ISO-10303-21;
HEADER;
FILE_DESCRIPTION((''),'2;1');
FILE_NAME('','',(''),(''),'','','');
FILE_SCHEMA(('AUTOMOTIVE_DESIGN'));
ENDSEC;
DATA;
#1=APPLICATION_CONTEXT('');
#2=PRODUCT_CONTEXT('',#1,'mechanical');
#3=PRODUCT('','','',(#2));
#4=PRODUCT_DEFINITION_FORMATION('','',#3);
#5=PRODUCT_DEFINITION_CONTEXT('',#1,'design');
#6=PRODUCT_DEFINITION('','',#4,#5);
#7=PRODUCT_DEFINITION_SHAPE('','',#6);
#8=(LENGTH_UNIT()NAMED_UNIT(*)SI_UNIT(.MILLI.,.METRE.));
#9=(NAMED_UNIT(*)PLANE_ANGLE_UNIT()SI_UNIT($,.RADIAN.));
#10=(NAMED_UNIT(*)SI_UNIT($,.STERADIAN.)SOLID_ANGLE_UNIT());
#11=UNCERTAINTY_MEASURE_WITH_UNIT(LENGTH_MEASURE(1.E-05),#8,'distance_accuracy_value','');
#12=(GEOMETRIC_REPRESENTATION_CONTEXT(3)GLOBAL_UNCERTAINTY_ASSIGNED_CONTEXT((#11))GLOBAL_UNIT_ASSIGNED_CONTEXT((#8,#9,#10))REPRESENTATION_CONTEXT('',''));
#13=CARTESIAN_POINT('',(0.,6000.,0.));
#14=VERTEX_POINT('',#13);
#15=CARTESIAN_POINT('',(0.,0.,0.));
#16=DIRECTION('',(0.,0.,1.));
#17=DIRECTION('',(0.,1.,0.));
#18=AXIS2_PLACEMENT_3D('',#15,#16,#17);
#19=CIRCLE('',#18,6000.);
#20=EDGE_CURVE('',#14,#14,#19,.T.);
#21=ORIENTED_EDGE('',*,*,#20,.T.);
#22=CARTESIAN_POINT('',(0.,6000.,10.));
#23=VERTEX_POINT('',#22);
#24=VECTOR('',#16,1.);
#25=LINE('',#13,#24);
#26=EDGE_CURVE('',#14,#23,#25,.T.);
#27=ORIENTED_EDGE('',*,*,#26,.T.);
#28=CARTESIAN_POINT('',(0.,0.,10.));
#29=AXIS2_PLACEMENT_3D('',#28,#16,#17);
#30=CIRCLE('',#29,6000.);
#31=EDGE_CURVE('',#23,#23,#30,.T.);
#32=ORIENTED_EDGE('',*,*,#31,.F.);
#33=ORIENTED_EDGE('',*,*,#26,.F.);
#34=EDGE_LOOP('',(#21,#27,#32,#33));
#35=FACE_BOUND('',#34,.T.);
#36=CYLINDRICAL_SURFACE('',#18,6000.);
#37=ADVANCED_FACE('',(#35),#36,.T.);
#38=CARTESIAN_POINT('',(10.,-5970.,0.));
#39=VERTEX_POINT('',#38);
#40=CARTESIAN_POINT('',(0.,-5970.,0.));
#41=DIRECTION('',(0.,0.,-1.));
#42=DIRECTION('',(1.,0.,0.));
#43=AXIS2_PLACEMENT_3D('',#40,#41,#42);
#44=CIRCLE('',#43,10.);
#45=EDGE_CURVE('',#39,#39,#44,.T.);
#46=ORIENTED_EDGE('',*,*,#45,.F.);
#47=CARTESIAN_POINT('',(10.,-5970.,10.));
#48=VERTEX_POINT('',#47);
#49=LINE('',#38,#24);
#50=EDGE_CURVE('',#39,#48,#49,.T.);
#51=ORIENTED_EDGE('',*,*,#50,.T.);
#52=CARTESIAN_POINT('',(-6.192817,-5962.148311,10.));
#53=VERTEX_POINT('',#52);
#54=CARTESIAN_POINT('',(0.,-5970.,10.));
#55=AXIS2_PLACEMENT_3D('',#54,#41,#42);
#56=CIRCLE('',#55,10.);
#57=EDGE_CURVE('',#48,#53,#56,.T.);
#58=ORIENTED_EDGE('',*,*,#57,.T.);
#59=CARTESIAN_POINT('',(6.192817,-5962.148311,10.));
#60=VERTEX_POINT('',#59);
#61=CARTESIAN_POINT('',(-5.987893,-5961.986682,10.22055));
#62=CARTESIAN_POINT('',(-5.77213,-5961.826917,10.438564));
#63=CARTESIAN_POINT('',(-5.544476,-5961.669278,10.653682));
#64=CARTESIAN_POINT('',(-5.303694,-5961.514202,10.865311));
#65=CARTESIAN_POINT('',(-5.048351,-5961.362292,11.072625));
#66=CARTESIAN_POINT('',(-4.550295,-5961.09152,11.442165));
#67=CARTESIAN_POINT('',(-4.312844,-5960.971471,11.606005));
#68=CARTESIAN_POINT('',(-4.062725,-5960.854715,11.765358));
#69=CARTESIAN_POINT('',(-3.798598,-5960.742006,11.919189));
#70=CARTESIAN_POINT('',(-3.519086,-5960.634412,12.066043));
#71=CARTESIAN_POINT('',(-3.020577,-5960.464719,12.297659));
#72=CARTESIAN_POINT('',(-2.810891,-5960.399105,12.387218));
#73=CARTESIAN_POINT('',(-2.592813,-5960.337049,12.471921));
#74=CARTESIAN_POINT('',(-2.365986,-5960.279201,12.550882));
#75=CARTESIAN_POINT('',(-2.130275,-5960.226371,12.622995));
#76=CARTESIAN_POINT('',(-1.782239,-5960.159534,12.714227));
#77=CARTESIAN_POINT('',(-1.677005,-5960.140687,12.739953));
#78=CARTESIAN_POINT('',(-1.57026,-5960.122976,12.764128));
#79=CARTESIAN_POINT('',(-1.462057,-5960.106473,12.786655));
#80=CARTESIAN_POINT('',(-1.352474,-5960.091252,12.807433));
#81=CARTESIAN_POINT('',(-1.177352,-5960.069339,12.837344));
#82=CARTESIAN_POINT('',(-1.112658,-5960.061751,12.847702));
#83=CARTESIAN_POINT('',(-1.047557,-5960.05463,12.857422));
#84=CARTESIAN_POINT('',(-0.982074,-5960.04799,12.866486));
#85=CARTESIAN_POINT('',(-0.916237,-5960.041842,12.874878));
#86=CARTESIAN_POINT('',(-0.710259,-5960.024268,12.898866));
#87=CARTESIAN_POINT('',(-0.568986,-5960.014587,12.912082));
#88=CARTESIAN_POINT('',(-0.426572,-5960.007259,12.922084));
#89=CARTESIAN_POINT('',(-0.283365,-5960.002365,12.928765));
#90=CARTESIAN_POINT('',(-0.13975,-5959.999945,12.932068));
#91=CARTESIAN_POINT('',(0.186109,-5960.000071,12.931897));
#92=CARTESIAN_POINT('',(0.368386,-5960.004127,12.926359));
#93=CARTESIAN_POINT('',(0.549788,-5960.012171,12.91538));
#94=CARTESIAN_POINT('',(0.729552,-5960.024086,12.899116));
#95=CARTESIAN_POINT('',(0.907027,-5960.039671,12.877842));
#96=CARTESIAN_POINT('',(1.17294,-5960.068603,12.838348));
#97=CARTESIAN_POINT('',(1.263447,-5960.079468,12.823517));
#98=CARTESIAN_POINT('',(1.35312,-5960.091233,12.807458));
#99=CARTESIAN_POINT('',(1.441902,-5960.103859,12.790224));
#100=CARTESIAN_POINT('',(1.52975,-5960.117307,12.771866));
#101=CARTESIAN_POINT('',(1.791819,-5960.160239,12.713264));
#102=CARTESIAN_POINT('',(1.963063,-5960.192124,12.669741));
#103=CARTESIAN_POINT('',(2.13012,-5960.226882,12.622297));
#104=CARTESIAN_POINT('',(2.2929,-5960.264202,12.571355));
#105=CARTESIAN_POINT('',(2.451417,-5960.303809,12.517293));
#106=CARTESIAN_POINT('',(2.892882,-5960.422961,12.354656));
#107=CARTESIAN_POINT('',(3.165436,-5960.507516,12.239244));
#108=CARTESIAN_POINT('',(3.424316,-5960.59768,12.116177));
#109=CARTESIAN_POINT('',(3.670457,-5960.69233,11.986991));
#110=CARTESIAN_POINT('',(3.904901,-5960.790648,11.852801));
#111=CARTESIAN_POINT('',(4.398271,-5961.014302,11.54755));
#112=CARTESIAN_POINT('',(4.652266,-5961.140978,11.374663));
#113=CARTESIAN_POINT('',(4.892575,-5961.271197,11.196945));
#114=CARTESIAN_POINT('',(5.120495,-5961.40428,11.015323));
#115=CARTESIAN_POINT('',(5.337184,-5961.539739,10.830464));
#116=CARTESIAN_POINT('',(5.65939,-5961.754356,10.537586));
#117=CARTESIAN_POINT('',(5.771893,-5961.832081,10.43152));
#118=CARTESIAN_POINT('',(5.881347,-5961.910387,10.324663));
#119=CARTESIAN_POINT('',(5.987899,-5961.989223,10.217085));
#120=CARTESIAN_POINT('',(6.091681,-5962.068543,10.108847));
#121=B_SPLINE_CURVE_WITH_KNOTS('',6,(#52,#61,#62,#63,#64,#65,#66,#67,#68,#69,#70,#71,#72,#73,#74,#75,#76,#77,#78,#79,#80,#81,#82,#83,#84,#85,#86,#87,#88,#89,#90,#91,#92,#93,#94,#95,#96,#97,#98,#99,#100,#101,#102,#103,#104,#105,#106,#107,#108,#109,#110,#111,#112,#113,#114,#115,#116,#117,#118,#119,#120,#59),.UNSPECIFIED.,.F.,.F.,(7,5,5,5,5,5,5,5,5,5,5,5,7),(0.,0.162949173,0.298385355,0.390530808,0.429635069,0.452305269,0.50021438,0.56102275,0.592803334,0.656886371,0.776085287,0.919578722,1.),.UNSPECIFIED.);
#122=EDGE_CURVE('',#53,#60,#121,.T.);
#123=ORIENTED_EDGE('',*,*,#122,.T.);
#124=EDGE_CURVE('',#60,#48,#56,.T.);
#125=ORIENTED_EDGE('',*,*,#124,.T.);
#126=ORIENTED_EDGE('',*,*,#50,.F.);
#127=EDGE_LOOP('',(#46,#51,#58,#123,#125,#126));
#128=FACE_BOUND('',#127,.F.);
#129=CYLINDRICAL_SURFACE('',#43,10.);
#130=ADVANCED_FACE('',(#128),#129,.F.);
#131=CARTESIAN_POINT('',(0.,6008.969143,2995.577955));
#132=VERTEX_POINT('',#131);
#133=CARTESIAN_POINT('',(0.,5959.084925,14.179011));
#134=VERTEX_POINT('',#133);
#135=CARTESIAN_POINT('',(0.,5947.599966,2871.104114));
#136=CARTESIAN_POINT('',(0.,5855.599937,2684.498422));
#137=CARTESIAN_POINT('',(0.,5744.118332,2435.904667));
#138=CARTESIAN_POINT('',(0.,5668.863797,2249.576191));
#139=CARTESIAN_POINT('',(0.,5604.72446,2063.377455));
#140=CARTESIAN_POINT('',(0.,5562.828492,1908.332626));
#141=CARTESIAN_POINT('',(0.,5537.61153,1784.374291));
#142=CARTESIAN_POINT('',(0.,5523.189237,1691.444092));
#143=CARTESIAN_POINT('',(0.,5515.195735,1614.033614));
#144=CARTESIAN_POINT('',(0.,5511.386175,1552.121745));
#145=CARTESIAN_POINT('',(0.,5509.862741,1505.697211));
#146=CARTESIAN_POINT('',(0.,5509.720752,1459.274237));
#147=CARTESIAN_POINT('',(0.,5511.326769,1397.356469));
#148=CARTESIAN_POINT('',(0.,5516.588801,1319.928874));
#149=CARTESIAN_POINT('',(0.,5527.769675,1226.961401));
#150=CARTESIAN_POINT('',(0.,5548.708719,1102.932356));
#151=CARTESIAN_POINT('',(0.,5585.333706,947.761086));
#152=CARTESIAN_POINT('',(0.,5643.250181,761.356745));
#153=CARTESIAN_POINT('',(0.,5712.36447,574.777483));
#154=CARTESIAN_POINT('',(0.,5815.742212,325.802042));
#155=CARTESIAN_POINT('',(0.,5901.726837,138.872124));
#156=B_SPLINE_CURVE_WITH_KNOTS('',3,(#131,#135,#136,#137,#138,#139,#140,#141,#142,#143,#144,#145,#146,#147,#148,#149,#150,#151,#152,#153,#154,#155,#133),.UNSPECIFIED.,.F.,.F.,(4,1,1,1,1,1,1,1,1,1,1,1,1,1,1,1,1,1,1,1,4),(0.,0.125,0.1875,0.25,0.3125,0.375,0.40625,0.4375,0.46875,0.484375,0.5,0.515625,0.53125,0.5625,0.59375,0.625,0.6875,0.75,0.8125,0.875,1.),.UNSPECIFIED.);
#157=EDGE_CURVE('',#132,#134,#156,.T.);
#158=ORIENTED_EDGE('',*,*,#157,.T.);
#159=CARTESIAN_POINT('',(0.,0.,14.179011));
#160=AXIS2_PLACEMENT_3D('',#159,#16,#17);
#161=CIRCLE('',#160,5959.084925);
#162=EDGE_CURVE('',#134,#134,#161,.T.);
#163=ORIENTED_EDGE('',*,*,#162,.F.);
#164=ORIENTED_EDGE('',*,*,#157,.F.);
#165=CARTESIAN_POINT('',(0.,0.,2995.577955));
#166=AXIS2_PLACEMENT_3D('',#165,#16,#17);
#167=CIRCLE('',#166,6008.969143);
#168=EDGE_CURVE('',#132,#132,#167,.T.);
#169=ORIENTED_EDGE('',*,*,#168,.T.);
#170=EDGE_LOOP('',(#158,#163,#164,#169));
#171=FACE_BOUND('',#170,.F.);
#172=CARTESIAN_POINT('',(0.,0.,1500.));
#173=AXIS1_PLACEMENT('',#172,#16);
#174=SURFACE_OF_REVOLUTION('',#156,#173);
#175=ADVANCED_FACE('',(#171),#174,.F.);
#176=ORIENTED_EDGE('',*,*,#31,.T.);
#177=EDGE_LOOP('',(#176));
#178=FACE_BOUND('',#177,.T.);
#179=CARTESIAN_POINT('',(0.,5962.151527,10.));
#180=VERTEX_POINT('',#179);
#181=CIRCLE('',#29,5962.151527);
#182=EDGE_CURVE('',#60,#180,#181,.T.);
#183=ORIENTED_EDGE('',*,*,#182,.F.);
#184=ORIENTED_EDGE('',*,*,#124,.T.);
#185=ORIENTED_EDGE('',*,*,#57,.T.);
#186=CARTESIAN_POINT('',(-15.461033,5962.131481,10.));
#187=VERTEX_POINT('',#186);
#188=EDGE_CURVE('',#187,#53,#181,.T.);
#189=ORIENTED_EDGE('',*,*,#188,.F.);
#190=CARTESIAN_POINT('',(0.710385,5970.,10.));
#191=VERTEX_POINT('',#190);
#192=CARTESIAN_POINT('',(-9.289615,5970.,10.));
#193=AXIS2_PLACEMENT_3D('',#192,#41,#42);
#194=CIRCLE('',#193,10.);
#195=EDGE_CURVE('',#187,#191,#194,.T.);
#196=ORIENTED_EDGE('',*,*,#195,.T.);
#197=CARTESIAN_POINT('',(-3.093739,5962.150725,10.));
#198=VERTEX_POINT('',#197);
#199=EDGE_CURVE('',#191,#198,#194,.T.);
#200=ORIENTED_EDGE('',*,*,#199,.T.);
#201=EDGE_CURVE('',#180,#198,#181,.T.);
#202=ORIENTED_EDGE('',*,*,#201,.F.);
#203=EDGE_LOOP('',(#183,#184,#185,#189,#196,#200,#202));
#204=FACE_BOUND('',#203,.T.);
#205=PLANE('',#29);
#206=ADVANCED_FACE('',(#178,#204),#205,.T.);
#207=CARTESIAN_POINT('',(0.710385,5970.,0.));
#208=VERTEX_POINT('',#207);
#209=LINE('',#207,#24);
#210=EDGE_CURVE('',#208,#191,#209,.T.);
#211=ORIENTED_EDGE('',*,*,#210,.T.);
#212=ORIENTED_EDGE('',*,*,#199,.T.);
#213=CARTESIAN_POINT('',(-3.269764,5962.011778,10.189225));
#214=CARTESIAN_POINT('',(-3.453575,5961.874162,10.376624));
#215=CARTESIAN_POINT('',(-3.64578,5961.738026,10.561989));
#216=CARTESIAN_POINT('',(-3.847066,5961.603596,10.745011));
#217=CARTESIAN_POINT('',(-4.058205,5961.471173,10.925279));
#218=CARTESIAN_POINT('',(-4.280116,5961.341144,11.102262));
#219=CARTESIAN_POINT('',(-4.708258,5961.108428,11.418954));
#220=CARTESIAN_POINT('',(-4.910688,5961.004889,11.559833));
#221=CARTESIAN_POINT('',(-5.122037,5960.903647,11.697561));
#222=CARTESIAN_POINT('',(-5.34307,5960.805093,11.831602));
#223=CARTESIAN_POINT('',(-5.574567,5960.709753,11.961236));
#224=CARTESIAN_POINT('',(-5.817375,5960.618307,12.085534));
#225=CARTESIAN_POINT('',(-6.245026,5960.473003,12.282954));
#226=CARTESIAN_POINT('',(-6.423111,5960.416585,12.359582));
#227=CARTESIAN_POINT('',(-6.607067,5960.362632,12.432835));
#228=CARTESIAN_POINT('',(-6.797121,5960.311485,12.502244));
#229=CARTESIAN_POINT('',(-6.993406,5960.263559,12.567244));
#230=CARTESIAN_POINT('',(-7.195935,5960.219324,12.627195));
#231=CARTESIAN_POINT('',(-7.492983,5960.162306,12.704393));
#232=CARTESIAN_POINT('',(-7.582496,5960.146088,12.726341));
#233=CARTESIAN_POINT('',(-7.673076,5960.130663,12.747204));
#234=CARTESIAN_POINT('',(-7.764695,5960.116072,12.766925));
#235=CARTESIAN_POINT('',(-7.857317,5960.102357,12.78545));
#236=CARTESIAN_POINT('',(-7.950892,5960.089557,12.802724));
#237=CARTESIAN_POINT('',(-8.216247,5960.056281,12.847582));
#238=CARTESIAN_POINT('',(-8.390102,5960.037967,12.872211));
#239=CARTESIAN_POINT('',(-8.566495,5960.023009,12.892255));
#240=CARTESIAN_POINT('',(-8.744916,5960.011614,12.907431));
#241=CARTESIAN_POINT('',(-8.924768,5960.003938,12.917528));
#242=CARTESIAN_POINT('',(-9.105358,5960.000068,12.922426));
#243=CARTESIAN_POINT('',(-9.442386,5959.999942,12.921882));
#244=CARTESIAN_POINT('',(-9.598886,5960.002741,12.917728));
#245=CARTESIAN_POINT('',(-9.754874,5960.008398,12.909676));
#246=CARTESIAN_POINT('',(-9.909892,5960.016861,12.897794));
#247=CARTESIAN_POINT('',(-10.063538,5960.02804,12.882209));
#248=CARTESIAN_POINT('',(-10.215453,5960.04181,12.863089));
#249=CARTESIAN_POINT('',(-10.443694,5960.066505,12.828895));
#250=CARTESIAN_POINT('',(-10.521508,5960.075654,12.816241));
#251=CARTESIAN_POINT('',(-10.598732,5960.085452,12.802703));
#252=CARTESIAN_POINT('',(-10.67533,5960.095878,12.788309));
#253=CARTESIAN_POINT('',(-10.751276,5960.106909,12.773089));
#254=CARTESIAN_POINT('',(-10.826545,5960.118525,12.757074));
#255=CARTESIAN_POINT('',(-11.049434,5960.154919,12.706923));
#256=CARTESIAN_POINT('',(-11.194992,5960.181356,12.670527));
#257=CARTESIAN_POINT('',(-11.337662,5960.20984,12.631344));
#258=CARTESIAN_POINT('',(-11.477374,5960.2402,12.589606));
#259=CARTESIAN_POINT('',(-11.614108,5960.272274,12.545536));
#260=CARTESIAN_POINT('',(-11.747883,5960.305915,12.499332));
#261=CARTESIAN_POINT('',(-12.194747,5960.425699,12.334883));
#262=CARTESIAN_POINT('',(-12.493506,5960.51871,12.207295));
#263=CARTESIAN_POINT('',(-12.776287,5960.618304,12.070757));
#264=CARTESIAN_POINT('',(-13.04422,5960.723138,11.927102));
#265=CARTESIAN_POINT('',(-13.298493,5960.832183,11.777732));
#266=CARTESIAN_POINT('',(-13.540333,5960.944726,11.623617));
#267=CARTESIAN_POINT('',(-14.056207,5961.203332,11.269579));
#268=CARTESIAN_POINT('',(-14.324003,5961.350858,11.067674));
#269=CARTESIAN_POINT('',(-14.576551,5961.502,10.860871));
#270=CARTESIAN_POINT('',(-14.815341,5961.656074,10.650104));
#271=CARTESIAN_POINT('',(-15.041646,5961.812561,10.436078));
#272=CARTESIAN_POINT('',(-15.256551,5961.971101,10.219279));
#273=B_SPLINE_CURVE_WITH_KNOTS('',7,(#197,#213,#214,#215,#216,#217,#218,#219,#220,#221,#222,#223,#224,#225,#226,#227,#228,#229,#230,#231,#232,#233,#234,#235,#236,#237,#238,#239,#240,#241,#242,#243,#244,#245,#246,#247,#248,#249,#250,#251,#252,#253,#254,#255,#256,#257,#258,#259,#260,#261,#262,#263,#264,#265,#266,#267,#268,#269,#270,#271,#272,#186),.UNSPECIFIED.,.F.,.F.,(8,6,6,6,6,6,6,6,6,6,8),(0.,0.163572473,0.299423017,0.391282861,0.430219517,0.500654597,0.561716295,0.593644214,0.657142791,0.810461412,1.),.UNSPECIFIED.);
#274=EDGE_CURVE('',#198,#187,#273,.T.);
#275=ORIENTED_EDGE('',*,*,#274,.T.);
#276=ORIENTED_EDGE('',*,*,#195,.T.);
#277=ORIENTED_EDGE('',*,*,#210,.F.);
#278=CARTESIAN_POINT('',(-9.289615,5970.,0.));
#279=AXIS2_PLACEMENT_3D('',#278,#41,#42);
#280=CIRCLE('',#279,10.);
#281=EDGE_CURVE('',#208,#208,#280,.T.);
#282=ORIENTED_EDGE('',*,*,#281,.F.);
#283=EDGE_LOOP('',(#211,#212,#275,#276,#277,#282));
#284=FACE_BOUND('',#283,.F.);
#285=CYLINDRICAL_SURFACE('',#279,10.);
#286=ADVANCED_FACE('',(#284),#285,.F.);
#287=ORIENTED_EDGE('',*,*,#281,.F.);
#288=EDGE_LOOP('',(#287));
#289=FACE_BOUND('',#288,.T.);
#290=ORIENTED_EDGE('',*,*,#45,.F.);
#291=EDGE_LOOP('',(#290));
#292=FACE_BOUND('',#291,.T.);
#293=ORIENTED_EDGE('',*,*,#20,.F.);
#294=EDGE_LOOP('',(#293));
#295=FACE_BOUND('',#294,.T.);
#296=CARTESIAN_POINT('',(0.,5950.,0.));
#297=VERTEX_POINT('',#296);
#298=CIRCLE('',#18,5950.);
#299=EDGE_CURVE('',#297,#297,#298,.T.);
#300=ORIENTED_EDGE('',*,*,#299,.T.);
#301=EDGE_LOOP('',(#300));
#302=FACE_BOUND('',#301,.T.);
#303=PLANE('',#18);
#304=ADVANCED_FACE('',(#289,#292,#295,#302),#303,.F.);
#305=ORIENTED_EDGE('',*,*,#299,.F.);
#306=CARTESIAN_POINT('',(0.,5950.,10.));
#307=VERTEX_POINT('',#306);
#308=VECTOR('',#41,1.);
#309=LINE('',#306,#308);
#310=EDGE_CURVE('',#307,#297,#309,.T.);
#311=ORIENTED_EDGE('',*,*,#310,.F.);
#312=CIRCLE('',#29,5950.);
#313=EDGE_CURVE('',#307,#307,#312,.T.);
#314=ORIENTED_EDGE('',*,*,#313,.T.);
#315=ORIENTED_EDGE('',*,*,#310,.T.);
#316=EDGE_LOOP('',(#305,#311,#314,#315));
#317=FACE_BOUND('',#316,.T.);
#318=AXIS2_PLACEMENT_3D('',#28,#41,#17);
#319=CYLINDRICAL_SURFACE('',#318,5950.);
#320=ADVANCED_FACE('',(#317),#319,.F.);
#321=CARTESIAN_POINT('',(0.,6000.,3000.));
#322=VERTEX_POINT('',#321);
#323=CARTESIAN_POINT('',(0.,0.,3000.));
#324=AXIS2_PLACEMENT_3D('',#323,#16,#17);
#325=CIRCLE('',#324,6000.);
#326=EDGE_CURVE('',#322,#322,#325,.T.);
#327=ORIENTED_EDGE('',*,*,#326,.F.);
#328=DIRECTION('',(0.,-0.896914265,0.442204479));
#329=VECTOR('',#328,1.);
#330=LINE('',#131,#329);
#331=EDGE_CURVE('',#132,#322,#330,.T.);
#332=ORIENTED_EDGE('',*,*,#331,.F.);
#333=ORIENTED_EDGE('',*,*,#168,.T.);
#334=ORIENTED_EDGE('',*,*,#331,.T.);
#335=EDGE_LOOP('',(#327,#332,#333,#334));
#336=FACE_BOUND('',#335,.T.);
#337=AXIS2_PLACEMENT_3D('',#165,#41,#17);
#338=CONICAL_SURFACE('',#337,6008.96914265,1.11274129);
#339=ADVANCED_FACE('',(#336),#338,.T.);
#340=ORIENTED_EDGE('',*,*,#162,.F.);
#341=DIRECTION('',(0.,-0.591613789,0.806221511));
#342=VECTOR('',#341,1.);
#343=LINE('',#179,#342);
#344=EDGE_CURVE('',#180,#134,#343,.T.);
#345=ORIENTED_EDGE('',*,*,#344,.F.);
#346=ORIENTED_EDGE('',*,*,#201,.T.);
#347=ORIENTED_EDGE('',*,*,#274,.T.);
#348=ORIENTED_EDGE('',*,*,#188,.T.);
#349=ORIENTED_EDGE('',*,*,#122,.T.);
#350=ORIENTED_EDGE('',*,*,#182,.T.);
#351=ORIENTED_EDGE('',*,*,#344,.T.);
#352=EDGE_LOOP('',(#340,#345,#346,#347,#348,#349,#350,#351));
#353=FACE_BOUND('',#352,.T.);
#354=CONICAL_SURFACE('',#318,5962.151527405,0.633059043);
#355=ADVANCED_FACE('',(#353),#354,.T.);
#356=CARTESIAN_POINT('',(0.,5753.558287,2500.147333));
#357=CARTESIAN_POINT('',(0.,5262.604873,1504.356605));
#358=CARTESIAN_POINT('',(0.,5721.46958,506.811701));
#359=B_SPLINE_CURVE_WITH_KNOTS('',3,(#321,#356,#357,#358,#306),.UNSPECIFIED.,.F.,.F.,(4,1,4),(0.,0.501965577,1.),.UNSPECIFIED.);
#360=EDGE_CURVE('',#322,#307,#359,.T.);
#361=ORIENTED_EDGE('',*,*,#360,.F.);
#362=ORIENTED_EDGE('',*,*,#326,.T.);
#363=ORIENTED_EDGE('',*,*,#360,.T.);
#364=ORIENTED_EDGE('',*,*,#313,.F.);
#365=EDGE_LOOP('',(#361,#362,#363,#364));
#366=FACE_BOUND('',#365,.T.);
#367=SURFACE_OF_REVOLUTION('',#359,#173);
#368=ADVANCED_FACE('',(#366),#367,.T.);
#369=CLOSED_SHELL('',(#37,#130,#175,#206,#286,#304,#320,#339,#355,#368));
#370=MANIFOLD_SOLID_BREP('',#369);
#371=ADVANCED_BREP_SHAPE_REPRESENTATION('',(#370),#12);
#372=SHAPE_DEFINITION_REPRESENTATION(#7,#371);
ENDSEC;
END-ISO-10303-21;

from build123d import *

# Parameters (mm, degrees)
F2_R     = 10
F3_DEPTH = 25


# Not quite as in the source:
# - the dataset's text gives a spline's control points without its knots; the knots are read off the source's solid


with BuildPart() as f1:
    # F0 (on Right) → F1 (revolve)
    with BuildSketch(Plane.YZ):
        with BuildLine():
            Line((5950, 0), (6000, 0))
            Line((6000, 0), (6000, 10))
            Line((6000, 10), (5962.1515274048, 10))
            Line((5962.1515274048, 10), (5959.0849250949, 14.1790113687))
            add(Edge.make_bspline(
                [(6008.9691426502, 2995.5779552105), (5947.599965947, 2871.104114176), (5855.5999367073, 2684.4984216115), (5744.1183321205, 2435.9046667303), (5668.8637968828, 2249.5761908646), (5604.7244604967, 2063.377454738), (5562.8284918667, 1908.3326261904), (5537.611529513, 1784.3742910205), (5523.1892366637, 1691.4440920514), (5515.1957350742, 1614.0336139805), (5511.3861746077, 1552.1217452366), (5509.8627410084, 1505.6972109055), (5509.720751737, 1459.2742365564), (5511.3267686116, 1397.3564694465), (5516.588801064, 1319.928874447), (5527.7696745838, 1226.9614014576), (5548.7087192496, 1102.9323557463), (5585.3337056773, 947.7610861227), (5643.2501808337, 761.356745279), (5712.3644695081, 574.7774830013), (5815.7422120981, 325.8020420574), (5901.726836699, 138.8721243314), (5959.0849250949, 14.1790113687)],
                knots=[0, 0, 0, 0, 0.125, 0.1875, 0.25, 0.3125, 0.375, 0.40625, 0.4375, 0.46875, 0.484375, 0.5, 0.515625, 0.53125, 0.5625, 0.59375, 0.625, 0.6875, 0.75, 0.8125, 0.875, 1, 1, 1, 1], degree=3))
            Line((6008.9691426502, 2995.5779552105), (6000, 3000))
            add(Edge.make_bspline(
                [(6000, 3000), (5753.5582866251, 2500.1473328667), (5262.6048729994, 1504.3566045911), (5721.4695801665, 506.8117008892), (5950, 10)],
                knots=[0, 0, 0, 0, 0.5019655766, 1, 1, 1, 1], degree=3))
            Line((5950, 10), (5950, 0))
        make_face()
    revolve(axis=Axis((0, 0, 1500), (0, 0, 1)))

    # F2 (on face) → F3 (cut)
    with BuildSketch(Plane(origin=(0, 0, 0), x_dir=(1, 0, 0), z_dir=(0, 0, -1))):
        with Locations((-9.2896150255, -5970)):
            Circle(F2_R)
        with Locations((0, 5970)):
            Circle(F2_R)
    extrude(amount=-F3_DEPTH, mode=Mode.SUBTRACT)


solid = f1.part
